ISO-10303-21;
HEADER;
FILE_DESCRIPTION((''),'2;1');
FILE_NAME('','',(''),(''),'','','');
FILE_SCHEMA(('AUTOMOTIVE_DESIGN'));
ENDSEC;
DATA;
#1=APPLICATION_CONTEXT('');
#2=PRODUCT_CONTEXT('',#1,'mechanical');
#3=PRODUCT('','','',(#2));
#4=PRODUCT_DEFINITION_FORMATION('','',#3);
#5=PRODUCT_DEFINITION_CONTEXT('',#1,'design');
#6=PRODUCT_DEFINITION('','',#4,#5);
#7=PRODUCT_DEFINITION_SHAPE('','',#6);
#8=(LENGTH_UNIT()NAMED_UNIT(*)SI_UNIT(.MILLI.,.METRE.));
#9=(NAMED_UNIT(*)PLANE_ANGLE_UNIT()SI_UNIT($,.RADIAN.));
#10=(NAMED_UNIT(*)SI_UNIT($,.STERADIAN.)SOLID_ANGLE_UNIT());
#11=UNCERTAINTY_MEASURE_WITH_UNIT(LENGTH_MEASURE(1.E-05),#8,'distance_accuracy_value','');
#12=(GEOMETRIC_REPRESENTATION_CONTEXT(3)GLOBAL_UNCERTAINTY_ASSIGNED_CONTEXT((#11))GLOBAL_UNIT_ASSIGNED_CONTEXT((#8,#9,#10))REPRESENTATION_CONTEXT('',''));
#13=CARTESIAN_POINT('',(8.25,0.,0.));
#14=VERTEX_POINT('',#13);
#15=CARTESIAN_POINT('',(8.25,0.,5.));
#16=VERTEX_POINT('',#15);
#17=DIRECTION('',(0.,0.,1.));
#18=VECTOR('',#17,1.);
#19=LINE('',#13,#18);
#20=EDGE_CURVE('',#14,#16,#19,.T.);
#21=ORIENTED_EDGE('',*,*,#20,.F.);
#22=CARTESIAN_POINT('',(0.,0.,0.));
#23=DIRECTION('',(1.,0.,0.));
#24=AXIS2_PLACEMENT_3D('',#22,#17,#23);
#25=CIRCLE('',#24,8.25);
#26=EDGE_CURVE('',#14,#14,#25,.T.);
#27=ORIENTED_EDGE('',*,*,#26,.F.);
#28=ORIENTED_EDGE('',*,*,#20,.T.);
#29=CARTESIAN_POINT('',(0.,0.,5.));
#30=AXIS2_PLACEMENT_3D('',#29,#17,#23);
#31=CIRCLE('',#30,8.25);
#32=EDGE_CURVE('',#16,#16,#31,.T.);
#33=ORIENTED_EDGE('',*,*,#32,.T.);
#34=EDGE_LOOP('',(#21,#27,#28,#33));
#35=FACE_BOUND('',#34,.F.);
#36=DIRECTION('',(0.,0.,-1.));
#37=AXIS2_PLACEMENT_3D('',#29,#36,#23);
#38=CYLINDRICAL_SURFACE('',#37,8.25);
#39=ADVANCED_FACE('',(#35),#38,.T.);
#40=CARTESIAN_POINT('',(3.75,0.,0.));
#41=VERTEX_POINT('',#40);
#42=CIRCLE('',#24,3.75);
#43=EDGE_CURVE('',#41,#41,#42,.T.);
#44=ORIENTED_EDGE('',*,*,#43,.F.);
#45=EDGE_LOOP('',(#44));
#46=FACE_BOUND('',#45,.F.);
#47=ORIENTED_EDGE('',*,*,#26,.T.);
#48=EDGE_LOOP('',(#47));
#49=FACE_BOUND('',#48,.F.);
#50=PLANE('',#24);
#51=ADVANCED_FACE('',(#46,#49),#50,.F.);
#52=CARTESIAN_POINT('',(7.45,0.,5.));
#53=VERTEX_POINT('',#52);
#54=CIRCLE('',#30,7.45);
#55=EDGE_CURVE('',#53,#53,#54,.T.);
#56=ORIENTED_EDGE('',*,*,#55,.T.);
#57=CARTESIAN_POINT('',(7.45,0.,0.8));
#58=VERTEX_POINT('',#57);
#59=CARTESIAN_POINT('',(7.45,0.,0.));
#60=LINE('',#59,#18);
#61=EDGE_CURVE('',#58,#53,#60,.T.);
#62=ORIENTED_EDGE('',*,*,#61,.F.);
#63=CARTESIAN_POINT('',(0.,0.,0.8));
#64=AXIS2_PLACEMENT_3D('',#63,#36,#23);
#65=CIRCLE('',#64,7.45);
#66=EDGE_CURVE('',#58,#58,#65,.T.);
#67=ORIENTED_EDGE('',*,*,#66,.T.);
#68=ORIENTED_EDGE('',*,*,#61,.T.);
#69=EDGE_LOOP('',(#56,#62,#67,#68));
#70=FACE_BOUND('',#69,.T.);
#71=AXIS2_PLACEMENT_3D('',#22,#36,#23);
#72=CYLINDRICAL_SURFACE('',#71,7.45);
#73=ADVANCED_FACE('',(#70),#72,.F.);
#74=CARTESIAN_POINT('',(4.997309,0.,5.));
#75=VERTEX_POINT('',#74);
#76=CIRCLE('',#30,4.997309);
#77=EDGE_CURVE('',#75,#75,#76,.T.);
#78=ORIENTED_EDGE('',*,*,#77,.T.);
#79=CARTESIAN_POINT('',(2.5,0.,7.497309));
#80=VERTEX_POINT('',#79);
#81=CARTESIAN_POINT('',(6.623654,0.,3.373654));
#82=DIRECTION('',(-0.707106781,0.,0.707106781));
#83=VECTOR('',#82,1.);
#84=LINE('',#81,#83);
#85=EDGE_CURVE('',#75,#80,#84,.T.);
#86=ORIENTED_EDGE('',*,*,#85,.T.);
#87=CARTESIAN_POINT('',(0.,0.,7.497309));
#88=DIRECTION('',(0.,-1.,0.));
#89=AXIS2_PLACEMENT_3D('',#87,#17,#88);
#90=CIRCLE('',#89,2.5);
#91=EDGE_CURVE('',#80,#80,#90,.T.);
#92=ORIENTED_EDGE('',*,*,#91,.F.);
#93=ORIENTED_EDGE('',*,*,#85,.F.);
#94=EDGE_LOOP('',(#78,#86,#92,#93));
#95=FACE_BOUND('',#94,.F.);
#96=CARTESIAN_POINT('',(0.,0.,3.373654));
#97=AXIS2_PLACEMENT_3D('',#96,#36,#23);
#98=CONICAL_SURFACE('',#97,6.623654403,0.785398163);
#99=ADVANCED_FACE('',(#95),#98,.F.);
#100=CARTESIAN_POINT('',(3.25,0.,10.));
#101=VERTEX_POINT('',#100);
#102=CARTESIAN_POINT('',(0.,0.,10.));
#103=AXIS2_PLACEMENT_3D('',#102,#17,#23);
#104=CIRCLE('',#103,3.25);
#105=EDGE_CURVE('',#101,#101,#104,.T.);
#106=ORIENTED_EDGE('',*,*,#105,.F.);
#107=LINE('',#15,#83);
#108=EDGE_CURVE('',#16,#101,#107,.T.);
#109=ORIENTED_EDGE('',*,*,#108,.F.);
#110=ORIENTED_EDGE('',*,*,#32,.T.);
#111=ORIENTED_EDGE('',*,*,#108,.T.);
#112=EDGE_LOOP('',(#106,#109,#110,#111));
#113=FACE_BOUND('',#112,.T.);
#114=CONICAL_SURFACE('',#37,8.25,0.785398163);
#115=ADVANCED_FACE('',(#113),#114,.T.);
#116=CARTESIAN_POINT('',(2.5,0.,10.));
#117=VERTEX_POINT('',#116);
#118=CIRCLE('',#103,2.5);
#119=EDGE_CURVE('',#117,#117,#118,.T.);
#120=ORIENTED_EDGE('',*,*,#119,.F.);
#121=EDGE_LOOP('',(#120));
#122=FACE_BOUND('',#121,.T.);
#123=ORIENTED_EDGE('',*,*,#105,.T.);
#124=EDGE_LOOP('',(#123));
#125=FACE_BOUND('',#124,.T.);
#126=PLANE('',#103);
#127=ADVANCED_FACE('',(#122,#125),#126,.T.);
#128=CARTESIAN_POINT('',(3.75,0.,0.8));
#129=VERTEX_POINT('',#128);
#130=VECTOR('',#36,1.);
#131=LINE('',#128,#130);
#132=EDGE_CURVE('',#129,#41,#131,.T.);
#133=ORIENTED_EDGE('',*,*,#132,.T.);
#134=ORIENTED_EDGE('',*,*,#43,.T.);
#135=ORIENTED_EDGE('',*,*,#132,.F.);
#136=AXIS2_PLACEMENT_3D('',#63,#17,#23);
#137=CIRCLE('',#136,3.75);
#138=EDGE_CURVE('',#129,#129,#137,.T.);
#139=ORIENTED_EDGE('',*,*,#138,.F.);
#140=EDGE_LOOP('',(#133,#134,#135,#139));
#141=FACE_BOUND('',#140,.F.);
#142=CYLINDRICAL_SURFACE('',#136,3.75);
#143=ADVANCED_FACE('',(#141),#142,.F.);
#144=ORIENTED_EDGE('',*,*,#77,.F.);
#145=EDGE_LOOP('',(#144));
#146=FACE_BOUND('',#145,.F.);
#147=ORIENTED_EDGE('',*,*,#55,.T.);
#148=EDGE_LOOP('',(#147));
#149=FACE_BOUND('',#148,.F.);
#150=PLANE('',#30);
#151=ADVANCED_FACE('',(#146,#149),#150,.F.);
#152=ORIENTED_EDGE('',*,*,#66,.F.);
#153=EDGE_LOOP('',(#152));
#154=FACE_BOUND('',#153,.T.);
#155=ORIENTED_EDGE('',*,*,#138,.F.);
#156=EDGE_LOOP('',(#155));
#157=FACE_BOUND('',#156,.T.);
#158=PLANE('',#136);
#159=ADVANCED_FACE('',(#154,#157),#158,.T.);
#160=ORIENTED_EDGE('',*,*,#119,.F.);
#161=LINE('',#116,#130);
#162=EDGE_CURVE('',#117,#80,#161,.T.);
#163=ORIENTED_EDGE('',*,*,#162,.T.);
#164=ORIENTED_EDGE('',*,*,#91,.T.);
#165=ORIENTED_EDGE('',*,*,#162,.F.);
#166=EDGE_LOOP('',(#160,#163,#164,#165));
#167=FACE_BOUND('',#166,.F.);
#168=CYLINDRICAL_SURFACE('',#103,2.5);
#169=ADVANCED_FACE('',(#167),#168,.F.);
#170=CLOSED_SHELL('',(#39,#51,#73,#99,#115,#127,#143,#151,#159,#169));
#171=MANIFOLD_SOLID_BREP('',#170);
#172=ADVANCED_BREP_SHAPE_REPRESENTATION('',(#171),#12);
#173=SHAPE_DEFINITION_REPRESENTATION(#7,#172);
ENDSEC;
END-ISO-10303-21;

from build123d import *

# Parameters (mm, degrees)
F0_R      = 8.25
F1_DEPTH  = 5
F2_T      = -0.8
F3_R      = 3.75
F4_DEPTH  = 25
F5_R      = 8.25
F6_DEPTH  = 5
F7_SIZE   = 5
F8_T      = 2.3
F9_R      = 2.5
F10_DEPTH = 25


# Not quite as in the source:
# - a shell that OpenCascade refuses in one call is made with other operations: the cavity is built on its own and cut out


with BuildPart() as f1:
    # F0 (on Top) → F1 (new body)
    with BuildSketch(Plane.XY):
        Circle(F0_R)
    extrude(amount=F1_DEPTH)

    # F2
    f2_openings = [f1.faces().sort_by_distance(p)[0] for p in [
        (0, 0, 5),
    ]]
    offset(amount=F2_T, openings=f2_openings)

    # F3 (on face) → F4 (cut)
    with BuildSketch(Plane.XY.offset(0.8)):
        Circle(F3_R)
    extrude(amount=-F4_DEPTH, mode=Mode.SUBTRACT)

    # F5 (on face) → F6 (join)
    with BuildSketch(Plane.XY.offset(5)):
        Circle(F5_R)
    extrude(amount=F6_DEPTH)

    # F7
    f7_edges = [f1.edges().sort_by_distance(p)[0] for p in [
        (-8.25, 0, 10),
    ]]
    chamfer(f7_edges, length=F7_SIZE)

    # F8: shell of thickness 2.3, made by hand


with BuildPart() as f8_core1:
    # F8_t2: copy of F1
    add(f1.part)

    # the walls: a layer under each face that stays
    f8_faces = [f8_core1.faces().sort_by_distance(p)[0] for p in [
        (-8.25, 0, 2.5),
        (-5.75, 0, 7.5),
        (-5.5, -5.5, 0),
        (0, 0, 10),
        (-3.75, 0, 0.4),
        (-4.9666666667, -4.9666666667, 0.8),
        (-7.45, 0, 2.9),
    ]]
    thicken(f8_faces, amount=-F8_T, mode=Mode.SUBTRACT)

    # F8_s3 → F8_t4 (revolve, cut)
    with BuildSketch(Plane.XZ):
        Polygon((7.427, 0.823), (7.45, -1.5), (9.75, -1.5), (9.75, 0.8), align=None)
    revolve(axis=Axis((0, 0, 0.8), (0, 0, -1)), mode=Mode.SUBTRACT)


with BuildPart() as f1_1:
    add(f1.part)

    # what is left inside the walls is the cavity
    f8_cavity = [f8_core1.part.solids().sort_by_distance(p)[0] for p in [
        (-4.081045, 0, 5.883737),
    ]]
    add(f8_cavity, mode=Mode.SUBTRACT)

    # F9 (on face) → F10 (cut)
    with BuildSketch(Plane.XY.offset(10)):
        Circle(F9_R)
    extrude(amount=-F10_DEPTH, mode=Mode.SUBTRACT)


solid = f1_1.part
